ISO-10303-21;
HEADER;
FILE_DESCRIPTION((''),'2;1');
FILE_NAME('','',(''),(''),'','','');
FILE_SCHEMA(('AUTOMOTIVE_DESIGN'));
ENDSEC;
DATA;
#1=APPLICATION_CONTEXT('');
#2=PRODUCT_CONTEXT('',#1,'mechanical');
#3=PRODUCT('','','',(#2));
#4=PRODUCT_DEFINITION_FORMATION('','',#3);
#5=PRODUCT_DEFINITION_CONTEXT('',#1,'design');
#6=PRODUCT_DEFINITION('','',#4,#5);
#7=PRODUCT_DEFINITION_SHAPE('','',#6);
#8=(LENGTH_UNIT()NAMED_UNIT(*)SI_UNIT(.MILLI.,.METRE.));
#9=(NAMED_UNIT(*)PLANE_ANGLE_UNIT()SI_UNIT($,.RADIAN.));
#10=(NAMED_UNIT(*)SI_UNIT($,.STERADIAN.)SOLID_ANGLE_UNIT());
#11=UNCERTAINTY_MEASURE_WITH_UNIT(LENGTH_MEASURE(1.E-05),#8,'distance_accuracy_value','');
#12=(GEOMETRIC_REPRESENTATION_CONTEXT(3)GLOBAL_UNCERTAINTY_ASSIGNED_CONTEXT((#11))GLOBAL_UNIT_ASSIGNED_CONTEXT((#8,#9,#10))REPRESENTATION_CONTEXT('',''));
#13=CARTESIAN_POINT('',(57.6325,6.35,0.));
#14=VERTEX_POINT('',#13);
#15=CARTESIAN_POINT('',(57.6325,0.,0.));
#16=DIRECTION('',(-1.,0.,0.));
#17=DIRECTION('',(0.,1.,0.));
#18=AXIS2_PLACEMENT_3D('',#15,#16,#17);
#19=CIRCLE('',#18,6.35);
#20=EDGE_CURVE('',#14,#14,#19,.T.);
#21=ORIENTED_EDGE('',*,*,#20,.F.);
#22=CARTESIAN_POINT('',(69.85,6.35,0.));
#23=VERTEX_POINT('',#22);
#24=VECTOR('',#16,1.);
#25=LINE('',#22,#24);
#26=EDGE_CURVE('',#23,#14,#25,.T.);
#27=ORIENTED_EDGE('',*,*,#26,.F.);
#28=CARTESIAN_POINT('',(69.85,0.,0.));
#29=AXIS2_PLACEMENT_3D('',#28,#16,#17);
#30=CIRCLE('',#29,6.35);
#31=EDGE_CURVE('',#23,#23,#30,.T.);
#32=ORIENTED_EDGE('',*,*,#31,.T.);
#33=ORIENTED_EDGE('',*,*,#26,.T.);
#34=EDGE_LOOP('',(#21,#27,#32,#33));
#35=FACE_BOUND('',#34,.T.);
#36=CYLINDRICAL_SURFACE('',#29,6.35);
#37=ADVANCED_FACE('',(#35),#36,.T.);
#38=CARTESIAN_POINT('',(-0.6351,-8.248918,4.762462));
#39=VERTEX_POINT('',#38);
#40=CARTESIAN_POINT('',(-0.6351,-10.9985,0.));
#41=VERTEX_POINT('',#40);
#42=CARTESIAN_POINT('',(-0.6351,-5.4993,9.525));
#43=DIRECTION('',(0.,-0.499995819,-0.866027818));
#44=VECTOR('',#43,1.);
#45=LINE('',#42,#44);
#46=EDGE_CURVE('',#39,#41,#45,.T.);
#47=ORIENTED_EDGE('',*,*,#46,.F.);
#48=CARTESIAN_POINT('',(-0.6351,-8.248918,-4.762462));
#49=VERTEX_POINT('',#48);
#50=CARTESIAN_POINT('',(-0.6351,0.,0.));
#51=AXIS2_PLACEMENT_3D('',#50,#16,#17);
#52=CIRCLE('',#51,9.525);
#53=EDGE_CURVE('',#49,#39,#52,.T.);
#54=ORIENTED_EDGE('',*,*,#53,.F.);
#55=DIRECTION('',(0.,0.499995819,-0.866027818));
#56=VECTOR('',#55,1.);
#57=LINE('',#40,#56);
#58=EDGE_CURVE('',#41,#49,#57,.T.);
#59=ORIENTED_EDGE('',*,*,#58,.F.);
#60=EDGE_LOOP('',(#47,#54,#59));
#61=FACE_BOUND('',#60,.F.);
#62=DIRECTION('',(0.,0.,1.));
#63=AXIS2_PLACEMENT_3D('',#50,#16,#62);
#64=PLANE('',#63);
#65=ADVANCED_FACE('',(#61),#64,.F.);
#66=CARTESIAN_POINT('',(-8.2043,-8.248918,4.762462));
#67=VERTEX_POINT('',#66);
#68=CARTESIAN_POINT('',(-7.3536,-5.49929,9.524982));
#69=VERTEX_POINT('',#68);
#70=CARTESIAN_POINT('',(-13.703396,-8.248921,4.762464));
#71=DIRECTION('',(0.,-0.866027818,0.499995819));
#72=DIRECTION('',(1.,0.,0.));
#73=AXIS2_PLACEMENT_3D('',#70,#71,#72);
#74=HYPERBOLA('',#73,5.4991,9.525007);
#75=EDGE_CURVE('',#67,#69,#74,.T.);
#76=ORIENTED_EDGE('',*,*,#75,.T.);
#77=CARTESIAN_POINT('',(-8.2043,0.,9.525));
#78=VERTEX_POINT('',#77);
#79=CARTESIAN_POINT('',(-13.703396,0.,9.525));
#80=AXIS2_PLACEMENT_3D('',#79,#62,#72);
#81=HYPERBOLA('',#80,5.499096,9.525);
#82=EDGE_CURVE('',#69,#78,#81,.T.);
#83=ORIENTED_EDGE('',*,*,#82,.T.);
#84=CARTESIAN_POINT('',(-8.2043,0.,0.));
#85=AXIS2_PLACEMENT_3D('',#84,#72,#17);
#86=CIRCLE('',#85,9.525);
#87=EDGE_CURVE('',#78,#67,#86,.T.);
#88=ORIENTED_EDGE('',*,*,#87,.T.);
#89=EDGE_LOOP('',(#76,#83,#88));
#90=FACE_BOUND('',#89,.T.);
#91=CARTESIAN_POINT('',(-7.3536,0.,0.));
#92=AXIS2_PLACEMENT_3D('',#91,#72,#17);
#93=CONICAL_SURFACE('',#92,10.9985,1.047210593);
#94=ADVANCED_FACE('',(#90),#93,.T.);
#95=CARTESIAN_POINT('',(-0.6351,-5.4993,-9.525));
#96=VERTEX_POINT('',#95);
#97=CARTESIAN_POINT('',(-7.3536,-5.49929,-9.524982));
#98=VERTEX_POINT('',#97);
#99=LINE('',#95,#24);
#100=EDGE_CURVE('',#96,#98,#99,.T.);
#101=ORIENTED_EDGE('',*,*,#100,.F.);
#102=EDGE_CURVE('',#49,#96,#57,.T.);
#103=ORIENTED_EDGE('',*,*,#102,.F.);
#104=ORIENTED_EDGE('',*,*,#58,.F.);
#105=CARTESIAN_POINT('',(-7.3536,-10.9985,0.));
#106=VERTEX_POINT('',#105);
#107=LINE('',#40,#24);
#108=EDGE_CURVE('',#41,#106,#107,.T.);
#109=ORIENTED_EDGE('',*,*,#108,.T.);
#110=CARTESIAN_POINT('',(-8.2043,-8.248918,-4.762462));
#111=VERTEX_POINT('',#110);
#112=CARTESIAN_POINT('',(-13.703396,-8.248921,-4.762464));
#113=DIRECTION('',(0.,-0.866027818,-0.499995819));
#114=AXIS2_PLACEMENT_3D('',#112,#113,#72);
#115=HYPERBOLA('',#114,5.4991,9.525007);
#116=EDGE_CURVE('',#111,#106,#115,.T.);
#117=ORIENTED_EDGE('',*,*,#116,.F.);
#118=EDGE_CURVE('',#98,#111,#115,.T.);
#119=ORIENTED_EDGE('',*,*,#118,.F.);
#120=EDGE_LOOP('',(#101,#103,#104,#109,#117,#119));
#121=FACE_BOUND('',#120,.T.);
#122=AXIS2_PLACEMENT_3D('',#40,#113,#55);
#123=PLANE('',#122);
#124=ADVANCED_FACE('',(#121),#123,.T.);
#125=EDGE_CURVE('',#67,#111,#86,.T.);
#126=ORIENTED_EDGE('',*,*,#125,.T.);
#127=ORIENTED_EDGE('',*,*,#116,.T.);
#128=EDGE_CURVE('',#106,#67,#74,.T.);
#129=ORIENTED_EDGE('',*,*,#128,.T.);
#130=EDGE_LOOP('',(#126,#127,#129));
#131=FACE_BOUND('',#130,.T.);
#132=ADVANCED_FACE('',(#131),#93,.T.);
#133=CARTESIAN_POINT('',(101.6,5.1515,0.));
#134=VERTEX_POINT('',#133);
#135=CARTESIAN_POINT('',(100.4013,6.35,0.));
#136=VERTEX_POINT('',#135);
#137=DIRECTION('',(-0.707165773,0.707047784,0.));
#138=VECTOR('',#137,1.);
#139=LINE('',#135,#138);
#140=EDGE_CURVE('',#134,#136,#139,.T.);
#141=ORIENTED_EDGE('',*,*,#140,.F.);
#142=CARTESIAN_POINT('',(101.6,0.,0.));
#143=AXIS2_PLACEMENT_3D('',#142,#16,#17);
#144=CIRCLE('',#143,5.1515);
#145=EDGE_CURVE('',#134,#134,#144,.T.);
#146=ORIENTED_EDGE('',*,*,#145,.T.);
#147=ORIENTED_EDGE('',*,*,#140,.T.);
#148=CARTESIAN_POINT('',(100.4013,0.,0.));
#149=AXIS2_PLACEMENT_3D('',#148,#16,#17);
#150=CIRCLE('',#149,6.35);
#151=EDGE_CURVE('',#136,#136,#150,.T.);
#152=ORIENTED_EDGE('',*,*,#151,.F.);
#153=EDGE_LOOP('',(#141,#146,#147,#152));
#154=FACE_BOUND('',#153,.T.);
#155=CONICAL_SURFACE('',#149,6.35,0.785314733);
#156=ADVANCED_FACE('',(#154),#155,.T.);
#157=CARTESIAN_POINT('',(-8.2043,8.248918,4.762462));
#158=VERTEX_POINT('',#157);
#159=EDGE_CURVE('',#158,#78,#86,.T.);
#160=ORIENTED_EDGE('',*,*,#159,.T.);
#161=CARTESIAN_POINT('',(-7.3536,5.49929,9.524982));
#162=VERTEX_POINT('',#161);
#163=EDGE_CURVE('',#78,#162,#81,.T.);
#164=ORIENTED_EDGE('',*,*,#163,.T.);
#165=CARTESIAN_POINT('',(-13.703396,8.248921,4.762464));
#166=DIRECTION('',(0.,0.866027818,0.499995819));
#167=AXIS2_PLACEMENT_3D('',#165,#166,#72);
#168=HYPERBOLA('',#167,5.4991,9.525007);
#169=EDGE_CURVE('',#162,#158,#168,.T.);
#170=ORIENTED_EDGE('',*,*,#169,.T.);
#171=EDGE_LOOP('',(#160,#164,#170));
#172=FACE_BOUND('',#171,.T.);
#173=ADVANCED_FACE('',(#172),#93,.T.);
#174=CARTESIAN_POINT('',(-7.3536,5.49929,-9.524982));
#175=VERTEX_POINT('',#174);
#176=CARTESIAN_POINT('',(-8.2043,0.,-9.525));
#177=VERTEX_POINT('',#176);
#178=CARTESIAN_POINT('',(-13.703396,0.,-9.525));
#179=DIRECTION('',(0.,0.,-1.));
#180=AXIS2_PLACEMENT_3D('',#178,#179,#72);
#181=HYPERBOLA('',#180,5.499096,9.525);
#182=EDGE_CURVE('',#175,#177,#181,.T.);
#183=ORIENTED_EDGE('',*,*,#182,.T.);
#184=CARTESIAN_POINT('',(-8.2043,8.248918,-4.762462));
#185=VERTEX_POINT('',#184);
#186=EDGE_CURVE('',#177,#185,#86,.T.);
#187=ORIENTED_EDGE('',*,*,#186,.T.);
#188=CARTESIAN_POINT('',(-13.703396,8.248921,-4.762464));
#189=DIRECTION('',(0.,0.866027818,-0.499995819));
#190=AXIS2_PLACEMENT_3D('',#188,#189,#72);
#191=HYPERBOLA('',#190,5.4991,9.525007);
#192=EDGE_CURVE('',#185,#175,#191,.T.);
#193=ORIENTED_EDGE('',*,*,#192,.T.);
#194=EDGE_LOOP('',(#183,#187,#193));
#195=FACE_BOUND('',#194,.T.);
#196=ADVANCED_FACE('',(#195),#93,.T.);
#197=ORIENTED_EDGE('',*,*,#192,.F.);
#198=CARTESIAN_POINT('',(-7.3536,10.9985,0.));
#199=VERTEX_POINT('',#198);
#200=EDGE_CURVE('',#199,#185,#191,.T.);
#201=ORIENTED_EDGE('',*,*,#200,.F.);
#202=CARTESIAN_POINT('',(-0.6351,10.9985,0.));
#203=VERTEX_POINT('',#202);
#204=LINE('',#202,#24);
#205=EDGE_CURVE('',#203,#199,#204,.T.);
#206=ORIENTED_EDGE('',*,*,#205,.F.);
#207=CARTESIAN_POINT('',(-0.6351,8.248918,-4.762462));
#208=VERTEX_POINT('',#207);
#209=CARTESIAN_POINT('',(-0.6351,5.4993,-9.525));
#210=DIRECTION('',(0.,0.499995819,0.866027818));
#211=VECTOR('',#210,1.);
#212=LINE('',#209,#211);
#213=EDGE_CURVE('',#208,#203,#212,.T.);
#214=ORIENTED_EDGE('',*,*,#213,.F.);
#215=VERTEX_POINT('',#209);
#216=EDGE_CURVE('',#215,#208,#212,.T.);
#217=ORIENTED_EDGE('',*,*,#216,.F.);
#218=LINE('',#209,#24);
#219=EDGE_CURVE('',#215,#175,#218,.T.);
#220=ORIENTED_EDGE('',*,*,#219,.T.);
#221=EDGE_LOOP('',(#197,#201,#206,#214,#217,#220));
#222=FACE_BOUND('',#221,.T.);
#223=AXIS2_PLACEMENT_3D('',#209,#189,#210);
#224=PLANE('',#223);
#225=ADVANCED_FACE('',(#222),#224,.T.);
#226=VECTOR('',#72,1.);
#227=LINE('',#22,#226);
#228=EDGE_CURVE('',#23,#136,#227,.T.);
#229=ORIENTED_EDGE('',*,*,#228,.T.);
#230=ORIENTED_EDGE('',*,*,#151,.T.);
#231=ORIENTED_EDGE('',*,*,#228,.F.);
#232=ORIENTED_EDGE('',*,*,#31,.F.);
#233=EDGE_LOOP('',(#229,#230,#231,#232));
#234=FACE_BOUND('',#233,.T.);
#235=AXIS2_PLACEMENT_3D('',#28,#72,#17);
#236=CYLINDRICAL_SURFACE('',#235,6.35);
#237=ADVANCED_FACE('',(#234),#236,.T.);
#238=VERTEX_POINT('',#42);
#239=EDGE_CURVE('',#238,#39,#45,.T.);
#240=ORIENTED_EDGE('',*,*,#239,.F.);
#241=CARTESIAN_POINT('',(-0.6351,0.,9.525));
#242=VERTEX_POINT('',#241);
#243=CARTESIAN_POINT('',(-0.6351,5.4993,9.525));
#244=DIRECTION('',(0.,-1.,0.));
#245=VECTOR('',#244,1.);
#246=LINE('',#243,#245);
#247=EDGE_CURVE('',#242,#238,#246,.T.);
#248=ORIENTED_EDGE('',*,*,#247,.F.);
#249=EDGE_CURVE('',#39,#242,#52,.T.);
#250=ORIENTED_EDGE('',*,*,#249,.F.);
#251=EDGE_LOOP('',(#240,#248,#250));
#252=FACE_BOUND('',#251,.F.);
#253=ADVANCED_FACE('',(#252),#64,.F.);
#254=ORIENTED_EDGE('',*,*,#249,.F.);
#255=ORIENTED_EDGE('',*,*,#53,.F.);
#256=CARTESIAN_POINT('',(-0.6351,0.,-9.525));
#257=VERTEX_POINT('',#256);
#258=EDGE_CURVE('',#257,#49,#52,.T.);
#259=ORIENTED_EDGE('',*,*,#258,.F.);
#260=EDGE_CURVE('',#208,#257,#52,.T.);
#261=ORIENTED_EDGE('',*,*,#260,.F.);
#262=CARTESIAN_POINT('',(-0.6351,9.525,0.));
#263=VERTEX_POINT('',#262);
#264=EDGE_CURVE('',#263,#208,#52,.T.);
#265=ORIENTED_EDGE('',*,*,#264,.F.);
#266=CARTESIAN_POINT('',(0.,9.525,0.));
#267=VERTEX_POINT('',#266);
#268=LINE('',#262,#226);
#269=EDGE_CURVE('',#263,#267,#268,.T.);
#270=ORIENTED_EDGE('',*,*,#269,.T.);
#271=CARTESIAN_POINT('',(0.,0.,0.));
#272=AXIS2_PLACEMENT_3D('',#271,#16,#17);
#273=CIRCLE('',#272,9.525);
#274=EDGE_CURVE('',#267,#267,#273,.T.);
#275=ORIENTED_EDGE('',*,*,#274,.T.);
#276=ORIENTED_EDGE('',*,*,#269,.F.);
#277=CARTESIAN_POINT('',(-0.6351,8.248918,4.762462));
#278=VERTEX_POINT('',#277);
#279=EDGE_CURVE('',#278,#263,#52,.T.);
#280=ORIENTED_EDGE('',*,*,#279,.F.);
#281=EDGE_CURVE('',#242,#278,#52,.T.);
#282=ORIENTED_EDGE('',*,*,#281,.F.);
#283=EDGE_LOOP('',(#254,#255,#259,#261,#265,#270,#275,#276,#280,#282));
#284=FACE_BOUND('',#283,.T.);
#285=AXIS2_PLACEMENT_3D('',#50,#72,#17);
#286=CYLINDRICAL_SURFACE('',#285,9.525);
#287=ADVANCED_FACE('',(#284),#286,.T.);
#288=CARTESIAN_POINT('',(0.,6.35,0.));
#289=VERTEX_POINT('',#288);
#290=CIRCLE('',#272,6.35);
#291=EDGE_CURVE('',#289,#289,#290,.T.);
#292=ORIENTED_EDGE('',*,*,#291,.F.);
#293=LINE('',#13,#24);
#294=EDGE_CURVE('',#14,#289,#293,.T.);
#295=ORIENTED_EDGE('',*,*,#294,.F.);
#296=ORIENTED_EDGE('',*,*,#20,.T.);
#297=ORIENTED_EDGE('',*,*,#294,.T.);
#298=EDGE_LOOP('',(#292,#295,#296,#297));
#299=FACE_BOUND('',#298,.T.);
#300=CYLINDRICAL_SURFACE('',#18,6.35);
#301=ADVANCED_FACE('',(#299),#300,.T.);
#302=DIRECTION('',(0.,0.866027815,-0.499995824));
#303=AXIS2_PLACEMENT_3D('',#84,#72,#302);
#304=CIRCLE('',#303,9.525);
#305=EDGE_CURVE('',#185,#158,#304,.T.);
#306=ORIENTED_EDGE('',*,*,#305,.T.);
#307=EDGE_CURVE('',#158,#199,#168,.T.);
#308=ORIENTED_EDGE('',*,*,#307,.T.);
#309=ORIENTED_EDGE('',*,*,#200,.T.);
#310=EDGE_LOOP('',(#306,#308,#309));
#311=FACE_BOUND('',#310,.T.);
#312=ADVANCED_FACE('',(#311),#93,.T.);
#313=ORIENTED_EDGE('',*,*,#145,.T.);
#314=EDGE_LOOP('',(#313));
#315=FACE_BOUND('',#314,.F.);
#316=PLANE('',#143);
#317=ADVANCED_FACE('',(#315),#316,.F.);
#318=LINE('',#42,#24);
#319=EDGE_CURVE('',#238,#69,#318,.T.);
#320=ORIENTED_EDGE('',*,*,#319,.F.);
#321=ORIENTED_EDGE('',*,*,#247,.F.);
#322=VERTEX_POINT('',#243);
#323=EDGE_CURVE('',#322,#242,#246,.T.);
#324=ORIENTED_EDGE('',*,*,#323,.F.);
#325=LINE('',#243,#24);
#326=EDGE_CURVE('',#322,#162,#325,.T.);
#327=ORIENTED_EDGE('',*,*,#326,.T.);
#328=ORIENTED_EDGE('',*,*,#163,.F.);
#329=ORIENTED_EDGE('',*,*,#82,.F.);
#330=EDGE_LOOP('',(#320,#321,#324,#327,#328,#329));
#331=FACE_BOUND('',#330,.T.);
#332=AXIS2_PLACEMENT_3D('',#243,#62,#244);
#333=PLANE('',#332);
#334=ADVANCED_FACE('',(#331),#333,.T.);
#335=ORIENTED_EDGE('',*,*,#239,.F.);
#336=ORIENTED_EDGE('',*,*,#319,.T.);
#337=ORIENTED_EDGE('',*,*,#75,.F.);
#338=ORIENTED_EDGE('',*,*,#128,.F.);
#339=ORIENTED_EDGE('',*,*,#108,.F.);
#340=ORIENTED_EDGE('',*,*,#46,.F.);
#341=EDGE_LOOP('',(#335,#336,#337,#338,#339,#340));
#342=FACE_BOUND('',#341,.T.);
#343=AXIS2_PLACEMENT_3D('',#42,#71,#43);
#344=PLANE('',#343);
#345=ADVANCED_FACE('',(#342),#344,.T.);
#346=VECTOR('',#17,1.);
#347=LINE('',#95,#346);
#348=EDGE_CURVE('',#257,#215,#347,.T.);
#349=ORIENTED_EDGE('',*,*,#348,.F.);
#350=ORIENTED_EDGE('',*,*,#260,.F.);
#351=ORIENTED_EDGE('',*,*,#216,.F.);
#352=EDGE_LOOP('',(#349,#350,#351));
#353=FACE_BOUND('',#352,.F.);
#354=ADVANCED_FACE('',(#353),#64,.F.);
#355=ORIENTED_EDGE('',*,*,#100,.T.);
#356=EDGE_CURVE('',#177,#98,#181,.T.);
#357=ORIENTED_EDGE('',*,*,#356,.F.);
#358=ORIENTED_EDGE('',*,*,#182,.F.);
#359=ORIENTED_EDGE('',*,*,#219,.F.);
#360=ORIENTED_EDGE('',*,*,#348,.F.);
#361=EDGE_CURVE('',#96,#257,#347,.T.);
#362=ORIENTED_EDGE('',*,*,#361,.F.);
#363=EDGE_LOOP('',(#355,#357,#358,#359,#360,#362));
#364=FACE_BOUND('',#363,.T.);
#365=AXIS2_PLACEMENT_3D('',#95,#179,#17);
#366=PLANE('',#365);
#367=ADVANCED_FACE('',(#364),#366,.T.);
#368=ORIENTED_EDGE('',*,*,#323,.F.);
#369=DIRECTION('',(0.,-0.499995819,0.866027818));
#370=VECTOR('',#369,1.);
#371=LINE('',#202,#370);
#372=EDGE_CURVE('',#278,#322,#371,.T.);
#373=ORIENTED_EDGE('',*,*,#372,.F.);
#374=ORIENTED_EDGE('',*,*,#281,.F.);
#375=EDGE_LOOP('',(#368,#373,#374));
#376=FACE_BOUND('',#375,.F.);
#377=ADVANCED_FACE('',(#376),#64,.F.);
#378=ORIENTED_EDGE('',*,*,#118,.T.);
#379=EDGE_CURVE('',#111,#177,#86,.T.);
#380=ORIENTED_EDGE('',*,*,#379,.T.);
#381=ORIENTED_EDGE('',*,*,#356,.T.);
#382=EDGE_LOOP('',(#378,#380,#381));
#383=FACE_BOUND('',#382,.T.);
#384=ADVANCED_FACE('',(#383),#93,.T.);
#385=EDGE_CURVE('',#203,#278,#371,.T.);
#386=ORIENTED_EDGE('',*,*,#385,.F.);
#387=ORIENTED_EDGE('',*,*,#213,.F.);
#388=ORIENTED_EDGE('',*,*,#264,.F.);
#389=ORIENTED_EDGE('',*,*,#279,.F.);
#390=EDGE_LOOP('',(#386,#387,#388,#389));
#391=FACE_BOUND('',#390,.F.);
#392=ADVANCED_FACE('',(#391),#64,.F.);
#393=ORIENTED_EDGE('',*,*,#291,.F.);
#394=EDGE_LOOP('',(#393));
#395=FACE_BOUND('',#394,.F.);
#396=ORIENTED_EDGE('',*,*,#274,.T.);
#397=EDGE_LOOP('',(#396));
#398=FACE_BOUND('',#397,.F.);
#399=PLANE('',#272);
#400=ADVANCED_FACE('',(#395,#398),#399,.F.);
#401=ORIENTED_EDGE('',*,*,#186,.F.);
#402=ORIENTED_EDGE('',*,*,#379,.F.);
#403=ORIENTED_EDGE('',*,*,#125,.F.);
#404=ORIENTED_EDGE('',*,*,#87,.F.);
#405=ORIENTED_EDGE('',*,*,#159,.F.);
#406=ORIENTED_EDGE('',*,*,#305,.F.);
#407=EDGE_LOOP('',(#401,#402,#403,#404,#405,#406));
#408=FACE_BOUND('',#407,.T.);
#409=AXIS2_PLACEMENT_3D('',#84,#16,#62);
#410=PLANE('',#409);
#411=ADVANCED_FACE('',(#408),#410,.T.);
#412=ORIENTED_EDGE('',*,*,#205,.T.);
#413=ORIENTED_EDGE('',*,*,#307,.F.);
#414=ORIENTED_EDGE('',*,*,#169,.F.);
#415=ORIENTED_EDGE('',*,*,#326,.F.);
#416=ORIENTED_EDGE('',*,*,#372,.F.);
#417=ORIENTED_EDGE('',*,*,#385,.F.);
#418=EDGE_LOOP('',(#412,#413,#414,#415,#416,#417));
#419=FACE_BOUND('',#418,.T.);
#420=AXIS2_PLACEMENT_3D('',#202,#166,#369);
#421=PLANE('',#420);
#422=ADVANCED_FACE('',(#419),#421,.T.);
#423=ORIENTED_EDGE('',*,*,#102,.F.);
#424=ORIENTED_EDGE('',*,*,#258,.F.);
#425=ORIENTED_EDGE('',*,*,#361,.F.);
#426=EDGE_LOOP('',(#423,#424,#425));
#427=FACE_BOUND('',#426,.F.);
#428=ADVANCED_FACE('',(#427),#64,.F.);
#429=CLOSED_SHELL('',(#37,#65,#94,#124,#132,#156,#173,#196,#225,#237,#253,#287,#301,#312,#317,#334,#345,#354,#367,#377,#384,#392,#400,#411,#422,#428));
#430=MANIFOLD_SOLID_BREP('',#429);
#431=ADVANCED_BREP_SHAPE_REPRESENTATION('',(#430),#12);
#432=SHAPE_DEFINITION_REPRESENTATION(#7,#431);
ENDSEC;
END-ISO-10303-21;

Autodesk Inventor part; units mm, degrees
ref_plane "YZ Plane" through (0, 0, 0) normal (1, 0, 0) x (0, 1, 0)
ref_plane "XZ Plane" through (0, 0, 0) normal (0, 1, 0) x (-1, 0, 0)
sketch "Sketch1" plane through (0, 0, 0) normal (0, 0, 1) x (1, 0, 0)
  line L0 (0, 9.525) -> (0, 6.35)
  line L1 (69.85, 6.35) -> (101.6, 6.35)
  line L2 (101.6, 6.35) -> (101.6, 0)
  line L3 (101.6, 0) -> (-0.6351, 0)
  line L4 (-21.0821, 0) -> (122.047, 0) projected
  line L5 (-0.6351, 0) -> (-0.6351, 9.525)
  line L6 (-0.6351, 9.525) -> (0, 9.525)
  line L7 (69.85, 6.35) -> (57.6325, 6.35)
  line L8 (57.6325, 6.35) -> (0, 6.35)
  line L9 (0, -1.905) -> (0, 11.43) projected
  dimension "d0" = 101.6
  dimension "d1" = 31.75
  dimension "d2" = 12.7
  dimension "d9" = 0.6351
  dimension "d10" = 19.05
  dimension "d13" = 12.2175
  dimension "d14" = 12.7
revolve "Body" add sketch "Sketch1" angle 360 about axis through (101.6, 0, 0) along (-1, 0, 0)
sketch "Sketch2" plane through (-0.6351, 0, 0) normal (-1, 0, 0) x (0, 0, 1)
  line L0 (0, 10.9985) -> (9.525, 5.4993)
  line L1 (9.525, 5.4993) -> (9.525, -5.4993)
  line L2 (9.525, -5.4993) -> (0, -10.9985)
  line L3 (0, -10.9985) -> (-9.525, -5.4993)
  line L4 (-9.525, -5.4993) -> (-9.525, 5.4993)
  line L5 (-9.525, 5.4993) -> (0, 10.9985)
  point P0 (0, 0)
  point P1 (0, 0)
  dimension "d11" = 19.05
extrude "Head" add sketch "Sketch2" along normal blind 7.5692
sketch "Sketch4" plane through (0, 0, 0) normal (0, 0, 1) x (1, 0, 0)
  line L0 (-8.2043, 9.525) -> (-8.2043, 10.9985)
  line L1 (-8.2043, 10.9985) -> (-7.3536, 10.9985)
  line L2 (-7.3536, 10.9985) -> (-8.2043, 9.525)
  line L3 (-9.7181, 0) -> (0.8787, 0) projected
  line L4 (-0.6351, 10.9985) -> (-8.2043, 10.9985) projected
  line L5 (-8.2043, 5.4993) -> (-8.2043, 10.9985) projected
  dimension "d5" = 30
  dimension "d19" = 19.05
revolve "Chamfer1" cut sketch "Sketch4" angle 360 about axis through (-10, 0, 0) along (1, 0, 0)
thread "Thread" size "1/2-13 UNC" class "2A" standard "ANSI Unified Screw Threads" length 31.75
chamfer "Chamfer2" distance 1.1985 distance2 1.1987 1 edges at (101.6, -6.35, 0) measured on face at (101.6, -2.326, 0.7465)
ref_plane "Work Plane1" through (1.525, 0, 0) normal (0, 0, 1) x (1, 0, 0)
equation "\"d0\" = NLG"
equation "\"d1\" = GEL"
equation "\"d2\" = GD"
equation "\"d10\" = SD2"
equation "\"d14\" = BDM"
equation "\"d11\" = SW"
equation "\"d3\" = KOH - SD"
equation "\"d5\" = ANG1"
equation "\"d19\" = SW0"
equation "\"d15\" = GEL"
equation "\"d6\" = -0.5 * SPD + 0.5 * GD"
equation "\"NLG\" = 101.6"
equation "\"GD\" = 12.7"
equation "\"BDM\" = 12.7"
equation "\"KOH\" = 8.2042"
equation "\"GEL\" = 31.75"
equation "\"SW\" = 19.05"
equation "\"SW0\" = SW"
equation "\"SPD\" = GD1"
equation "\"SD2\" = SW"
equation "\"SD\" = 0.635"
equation "\"ANG1\" = 30deg"
equation "\"GAL\" = 12.2174"
equation "\"GUL\" = 1.19863"
equation "\"RR\" = 0.381"
equation "\"WFT\" = SD"
equation "\"GD1\" = 10.303"
equation "\"THREADDIA\" = 12.7"
equation "\"SDH\" = SW"
equation "\"SDHG\" = 57.6326"
equation "\"TOA\" = 30deg"
equation "\"FAWI\" = 45deg"
equation "\"NND\" = 12.7"
equation "\"E0\" = 22.00275"
properties part number "AS 2465 - 1/2 x 4  UNC" material "Steel, Mild"
